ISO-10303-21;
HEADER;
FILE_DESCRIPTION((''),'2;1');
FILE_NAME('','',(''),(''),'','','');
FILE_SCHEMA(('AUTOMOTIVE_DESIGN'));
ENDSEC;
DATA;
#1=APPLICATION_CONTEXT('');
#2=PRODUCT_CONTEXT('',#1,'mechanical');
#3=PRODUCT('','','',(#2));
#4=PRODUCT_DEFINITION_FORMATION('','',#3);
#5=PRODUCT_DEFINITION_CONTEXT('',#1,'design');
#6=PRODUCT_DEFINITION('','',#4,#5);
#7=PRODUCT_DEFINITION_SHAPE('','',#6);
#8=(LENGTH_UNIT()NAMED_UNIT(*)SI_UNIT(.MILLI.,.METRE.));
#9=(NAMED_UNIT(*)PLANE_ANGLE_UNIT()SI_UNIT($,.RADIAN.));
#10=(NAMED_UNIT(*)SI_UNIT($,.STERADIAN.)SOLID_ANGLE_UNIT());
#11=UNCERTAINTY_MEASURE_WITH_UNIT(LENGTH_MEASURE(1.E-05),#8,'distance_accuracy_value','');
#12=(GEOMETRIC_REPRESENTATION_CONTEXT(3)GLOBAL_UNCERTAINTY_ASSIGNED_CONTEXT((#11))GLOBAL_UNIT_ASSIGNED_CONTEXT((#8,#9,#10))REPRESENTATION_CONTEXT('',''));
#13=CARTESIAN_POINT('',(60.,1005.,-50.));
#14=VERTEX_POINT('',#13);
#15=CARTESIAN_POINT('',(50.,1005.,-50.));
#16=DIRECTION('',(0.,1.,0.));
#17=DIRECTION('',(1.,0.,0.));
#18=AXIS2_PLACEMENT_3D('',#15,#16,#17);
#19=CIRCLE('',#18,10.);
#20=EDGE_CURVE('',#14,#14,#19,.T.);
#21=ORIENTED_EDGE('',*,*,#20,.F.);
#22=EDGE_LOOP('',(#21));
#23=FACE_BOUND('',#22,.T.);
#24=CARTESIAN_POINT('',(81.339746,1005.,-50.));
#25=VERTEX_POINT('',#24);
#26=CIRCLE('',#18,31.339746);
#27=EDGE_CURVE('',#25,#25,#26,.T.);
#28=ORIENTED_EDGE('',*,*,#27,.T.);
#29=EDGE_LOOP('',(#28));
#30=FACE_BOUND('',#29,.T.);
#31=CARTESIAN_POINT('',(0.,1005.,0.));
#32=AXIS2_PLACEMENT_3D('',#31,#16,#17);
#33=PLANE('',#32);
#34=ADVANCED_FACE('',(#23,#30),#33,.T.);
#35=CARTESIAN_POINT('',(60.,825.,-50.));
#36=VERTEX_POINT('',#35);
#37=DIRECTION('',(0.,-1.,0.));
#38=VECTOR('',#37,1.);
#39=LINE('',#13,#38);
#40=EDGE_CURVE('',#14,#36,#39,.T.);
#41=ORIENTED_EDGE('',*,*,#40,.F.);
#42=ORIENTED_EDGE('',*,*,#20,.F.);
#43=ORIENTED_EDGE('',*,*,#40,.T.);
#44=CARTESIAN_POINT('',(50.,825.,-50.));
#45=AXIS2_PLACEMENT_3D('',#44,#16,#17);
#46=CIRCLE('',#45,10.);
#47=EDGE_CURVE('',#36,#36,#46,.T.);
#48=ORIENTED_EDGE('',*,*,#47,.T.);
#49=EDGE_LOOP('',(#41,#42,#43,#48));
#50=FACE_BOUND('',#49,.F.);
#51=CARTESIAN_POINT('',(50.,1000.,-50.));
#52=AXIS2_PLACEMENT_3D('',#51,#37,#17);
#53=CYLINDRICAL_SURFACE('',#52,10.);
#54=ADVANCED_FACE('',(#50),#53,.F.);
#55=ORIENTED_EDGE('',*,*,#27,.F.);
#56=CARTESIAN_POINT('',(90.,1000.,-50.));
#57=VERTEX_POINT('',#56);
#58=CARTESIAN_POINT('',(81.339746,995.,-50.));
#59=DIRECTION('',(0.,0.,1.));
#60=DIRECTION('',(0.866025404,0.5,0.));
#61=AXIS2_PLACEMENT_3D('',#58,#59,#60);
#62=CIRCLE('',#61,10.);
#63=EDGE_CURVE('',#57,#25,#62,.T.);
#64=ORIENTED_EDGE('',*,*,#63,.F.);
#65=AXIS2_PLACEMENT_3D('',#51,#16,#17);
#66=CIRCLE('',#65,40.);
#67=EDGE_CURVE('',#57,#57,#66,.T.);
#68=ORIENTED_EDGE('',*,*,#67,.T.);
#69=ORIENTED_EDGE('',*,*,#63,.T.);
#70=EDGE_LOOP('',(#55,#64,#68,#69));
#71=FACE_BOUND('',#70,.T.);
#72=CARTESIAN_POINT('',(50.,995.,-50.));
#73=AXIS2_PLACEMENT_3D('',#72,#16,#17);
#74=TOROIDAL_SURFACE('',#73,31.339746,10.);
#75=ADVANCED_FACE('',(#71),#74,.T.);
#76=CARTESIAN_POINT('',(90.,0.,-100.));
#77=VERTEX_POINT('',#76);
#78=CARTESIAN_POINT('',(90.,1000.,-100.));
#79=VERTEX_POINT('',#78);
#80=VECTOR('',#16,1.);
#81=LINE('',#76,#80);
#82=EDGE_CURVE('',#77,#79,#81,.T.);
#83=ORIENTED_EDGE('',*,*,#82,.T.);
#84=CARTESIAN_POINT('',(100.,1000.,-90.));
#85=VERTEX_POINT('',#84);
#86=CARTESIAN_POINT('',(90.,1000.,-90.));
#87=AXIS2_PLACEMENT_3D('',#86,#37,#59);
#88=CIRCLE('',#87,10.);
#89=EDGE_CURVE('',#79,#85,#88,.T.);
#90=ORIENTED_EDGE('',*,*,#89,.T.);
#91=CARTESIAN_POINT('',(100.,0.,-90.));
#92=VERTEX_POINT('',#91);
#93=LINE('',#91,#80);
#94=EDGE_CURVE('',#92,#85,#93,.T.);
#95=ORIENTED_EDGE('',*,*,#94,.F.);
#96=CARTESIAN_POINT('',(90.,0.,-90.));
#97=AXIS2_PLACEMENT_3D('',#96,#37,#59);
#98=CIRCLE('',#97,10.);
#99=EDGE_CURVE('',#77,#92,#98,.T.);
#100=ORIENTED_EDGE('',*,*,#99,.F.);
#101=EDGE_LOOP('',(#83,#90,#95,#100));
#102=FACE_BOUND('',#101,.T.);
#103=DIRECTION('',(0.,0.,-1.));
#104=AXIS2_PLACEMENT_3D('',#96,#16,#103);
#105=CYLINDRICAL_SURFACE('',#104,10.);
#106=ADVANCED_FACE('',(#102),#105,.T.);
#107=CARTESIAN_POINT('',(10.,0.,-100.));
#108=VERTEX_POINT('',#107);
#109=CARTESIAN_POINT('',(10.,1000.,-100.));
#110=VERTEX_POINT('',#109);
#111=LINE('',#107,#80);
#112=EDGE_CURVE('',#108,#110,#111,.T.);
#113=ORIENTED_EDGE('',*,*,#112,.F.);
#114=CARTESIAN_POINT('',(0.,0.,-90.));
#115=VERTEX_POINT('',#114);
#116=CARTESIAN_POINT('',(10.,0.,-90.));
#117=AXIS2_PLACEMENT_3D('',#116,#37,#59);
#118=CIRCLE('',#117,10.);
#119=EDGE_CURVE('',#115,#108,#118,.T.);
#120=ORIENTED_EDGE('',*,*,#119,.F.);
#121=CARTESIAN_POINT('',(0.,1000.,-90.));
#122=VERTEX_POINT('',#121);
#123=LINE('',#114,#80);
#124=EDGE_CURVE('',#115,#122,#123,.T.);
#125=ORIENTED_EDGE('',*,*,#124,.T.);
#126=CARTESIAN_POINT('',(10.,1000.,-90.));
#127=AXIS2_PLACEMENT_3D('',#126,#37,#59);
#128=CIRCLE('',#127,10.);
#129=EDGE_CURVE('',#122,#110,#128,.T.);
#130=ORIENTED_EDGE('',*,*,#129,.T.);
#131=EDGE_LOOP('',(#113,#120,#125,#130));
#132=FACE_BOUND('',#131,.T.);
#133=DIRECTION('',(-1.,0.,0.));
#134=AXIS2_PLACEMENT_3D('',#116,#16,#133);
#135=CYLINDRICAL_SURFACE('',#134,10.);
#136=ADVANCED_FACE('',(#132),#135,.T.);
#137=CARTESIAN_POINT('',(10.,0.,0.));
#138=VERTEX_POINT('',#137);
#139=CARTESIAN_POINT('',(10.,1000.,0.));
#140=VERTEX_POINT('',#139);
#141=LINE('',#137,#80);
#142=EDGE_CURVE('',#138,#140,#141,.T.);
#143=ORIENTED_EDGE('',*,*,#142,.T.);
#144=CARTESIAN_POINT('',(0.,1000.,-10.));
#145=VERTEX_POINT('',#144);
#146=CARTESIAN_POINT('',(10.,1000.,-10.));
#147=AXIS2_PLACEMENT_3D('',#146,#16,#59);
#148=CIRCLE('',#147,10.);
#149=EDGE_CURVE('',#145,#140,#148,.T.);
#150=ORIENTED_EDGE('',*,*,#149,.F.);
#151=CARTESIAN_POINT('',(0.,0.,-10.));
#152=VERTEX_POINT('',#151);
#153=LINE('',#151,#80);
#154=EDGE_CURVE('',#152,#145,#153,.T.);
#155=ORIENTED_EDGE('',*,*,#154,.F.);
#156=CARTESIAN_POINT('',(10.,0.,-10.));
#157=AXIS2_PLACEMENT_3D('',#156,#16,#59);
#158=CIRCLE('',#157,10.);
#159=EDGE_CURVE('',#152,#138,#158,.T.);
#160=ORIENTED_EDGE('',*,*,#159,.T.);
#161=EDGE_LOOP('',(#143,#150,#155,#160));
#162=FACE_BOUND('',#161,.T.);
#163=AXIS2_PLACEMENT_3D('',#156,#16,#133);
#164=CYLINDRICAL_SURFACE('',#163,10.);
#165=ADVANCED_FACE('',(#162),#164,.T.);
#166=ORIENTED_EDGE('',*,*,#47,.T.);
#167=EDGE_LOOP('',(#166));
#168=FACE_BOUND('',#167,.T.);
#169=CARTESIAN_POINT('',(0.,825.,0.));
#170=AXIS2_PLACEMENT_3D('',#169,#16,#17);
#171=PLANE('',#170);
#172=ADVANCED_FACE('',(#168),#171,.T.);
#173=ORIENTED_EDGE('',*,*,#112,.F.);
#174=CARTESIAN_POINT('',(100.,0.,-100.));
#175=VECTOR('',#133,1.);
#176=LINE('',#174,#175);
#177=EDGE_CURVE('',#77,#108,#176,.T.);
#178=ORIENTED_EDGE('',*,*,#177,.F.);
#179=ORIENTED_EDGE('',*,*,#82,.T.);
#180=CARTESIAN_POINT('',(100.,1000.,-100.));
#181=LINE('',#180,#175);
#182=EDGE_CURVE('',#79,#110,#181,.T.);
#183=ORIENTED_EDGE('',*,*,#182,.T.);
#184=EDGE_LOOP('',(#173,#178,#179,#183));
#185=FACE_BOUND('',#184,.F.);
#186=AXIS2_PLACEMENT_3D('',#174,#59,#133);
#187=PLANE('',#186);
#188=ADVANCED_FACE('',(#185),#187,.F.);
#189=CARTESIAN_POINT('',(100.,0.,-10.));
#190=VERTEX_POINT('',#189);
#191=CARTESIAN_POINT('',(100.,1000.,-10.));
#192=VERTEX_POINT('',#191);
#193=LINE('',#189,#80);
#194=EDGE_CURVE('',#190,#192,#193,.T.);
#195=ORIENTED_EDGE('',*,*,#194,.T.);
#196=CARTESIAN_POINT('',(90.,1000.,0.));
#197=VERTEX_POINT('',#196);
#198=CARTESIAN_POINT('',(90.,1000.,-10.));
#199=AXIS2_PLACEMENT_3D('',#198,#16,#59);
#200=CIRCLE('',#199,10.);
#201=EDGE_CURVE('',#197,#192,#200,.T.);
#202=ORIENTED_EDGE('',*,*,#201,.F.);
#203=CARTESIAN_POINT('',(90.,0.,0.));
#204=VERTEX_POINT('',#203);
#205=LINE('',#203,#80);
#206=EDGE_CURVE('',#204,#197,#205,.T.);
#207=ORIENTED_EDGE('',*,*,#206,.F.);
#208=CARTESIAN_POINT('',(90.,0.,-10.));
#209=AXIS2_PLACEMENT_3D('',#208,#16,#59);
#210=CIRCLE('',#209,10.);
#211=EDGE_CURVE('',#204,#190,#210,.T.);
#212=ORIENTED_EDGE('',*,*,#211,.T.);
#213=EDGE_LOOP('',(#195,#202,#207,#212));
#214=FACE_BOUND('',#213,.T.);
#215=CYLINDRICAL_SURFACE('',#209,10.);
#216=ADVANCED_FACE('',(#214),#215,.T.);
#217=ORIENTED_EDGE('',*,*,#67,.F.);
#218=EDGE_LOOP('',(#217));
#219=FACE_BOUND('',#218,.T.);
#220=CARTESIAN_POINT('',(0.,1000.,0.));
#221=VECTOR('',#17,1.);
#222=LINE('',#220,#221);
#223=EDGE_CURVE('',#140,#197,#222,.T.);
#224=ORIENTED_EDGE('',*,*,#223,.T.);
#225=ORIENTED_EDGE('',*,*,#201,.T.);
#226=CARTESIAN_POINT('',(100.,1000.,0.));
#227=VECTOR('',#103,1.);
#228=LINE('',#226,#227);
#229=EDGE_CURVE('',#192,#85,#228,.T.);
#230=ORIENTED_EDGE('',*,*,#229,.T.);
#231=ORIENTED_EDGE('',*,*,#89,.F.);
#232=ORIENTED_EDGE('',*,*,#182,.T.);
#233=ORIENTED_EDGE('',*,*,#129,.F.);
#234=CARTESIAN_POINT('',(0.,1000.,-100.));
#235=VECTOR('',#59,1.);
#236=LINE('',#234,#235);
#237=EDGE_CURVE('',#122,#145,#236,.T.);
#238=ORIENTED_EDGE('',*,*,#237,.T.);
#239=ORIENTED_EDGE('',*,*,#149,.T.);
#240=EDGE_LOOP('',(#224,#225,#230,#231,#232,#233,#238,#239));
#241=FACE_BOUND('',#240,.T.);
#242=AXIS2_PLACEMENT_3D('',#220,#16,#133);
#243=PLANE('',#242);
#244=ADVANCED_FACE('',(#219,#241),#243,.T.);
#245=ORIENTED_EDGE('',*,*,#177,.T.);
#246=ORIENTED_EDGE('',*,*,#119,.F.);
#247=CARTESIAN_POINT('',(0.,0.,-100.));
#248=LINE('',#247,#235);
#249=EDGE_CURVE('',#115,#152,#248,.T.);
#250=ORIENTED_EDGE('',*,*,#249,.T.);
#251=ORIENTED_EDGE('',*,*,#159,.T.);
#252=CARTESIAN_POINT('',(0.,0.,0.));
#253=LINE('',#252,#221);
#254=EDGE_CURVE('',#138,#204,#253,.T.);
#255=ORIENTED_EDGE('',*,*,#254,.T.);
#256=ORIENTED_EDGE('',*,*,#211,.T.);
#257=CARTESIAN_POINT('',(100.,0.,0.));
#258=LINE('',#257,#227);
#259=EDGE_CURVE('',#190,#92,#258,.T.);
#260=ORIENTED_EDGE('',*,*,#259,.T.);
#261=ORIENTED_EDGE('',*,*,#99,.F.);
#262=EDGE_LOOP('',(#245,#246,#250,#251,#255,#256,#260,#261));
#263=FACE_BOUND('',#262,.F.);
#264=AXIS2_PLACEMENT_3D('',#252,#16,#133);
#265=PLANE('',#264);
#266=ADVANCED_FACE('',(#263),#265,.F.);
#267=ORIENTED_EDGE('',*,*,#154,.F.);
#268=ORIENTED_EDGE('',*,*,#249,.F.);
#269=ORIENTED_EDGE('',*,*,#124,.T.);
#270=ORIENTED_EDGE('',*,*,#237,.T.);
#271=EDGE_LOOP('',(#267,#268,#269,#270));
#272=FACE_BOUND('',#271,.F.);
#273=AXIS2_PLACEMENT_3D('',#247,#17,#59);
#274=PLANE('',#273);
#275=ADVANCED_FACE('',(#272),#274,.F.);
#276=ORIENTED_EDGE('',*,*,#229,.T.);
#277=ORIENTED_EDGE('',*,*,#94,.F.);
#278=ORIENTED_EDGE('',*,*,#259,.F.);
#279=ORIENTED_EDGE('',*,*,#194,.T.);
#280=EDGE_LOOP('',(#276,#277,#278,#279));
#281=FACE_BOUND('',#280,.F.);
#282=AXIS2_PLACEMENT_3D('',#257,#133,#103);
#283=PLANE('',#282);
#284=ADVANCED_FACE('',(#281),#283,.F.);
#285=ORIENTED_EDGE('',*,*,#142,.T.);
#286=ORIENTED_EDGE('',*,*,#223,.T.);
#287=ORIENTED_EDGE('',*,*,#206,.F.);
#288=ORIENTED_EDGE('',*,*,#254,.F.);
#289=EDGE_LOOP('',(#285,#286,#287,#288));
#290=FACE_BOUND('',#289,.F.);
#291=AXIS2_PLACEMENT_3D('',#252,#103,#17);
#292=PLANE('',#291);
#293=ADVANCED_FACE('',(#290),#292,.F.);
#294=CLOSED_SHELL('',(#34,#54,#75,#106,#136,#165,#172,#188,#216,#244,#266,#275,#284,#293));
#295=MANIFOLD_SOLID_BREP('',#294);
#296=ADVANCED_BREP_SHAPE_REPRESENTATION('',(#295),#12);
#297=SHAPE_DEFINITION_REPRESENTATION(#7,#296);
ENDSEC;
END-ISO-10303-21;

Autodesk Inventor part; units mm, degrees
ref_plane "YZ Plane" through (0, 0, 0) normal (1, 0, 0) x (0, 1, 0)
ref_plane "XZ Plane" through (0, 0, 0) normal (0, 1, 0) x (-1, 0, 0)
ref_plane "XY Plane" through (0, 0, 0) normal (0, 0, 1) x (1, 0, 0)
sketch "Sketch1" plane through (0, 0, 0) normal (0, 1, 0) x (-1, 0, 0)
  line L0 (0, 0) -> (-100, 0)
  line L1 (-100, 0) -> (-100, -100)
  line L2 (-100, -100) -> (0, -100)
  line L3 (0, -100) -> (0, 0)
  dimension "d0" = 100
  dimension "d1" = 100
extrude "Extrusion1" add sketch "Sketch1" along normal blind 1000
sketch "Sketch2" plane through (0, 1000, 0) normal (0, 1, 0) x (1, 0, 0)
  line L0 (100, 0) -> (100, 100) projected
  line L1 (100, 100) -> (0, 100) projected
  circle A0 centre (50, 50) radius 10
  circle A1 centre (50, 50) radius 40
  point P0 (0, 0)
  dimension "d4" = 20
  dimension "d5" = 80
extrude "Extrusion2" cut sketch "Sketch2" against normal blind 175 contours A0
extrude "Extrusion3" add sketch "Sketch2" along normal blind 5
fillet "Fillet1" radius 10 1 edges at (10, 1005, -50)
fillet "Fillet2" radius 10 4 edges at (100, 500, 0) (0, 500, 0) (0, 500, -100) (100, 500, -100)
properties part number "pneumatic_cylinder_ body" material "Stainless Steel"
